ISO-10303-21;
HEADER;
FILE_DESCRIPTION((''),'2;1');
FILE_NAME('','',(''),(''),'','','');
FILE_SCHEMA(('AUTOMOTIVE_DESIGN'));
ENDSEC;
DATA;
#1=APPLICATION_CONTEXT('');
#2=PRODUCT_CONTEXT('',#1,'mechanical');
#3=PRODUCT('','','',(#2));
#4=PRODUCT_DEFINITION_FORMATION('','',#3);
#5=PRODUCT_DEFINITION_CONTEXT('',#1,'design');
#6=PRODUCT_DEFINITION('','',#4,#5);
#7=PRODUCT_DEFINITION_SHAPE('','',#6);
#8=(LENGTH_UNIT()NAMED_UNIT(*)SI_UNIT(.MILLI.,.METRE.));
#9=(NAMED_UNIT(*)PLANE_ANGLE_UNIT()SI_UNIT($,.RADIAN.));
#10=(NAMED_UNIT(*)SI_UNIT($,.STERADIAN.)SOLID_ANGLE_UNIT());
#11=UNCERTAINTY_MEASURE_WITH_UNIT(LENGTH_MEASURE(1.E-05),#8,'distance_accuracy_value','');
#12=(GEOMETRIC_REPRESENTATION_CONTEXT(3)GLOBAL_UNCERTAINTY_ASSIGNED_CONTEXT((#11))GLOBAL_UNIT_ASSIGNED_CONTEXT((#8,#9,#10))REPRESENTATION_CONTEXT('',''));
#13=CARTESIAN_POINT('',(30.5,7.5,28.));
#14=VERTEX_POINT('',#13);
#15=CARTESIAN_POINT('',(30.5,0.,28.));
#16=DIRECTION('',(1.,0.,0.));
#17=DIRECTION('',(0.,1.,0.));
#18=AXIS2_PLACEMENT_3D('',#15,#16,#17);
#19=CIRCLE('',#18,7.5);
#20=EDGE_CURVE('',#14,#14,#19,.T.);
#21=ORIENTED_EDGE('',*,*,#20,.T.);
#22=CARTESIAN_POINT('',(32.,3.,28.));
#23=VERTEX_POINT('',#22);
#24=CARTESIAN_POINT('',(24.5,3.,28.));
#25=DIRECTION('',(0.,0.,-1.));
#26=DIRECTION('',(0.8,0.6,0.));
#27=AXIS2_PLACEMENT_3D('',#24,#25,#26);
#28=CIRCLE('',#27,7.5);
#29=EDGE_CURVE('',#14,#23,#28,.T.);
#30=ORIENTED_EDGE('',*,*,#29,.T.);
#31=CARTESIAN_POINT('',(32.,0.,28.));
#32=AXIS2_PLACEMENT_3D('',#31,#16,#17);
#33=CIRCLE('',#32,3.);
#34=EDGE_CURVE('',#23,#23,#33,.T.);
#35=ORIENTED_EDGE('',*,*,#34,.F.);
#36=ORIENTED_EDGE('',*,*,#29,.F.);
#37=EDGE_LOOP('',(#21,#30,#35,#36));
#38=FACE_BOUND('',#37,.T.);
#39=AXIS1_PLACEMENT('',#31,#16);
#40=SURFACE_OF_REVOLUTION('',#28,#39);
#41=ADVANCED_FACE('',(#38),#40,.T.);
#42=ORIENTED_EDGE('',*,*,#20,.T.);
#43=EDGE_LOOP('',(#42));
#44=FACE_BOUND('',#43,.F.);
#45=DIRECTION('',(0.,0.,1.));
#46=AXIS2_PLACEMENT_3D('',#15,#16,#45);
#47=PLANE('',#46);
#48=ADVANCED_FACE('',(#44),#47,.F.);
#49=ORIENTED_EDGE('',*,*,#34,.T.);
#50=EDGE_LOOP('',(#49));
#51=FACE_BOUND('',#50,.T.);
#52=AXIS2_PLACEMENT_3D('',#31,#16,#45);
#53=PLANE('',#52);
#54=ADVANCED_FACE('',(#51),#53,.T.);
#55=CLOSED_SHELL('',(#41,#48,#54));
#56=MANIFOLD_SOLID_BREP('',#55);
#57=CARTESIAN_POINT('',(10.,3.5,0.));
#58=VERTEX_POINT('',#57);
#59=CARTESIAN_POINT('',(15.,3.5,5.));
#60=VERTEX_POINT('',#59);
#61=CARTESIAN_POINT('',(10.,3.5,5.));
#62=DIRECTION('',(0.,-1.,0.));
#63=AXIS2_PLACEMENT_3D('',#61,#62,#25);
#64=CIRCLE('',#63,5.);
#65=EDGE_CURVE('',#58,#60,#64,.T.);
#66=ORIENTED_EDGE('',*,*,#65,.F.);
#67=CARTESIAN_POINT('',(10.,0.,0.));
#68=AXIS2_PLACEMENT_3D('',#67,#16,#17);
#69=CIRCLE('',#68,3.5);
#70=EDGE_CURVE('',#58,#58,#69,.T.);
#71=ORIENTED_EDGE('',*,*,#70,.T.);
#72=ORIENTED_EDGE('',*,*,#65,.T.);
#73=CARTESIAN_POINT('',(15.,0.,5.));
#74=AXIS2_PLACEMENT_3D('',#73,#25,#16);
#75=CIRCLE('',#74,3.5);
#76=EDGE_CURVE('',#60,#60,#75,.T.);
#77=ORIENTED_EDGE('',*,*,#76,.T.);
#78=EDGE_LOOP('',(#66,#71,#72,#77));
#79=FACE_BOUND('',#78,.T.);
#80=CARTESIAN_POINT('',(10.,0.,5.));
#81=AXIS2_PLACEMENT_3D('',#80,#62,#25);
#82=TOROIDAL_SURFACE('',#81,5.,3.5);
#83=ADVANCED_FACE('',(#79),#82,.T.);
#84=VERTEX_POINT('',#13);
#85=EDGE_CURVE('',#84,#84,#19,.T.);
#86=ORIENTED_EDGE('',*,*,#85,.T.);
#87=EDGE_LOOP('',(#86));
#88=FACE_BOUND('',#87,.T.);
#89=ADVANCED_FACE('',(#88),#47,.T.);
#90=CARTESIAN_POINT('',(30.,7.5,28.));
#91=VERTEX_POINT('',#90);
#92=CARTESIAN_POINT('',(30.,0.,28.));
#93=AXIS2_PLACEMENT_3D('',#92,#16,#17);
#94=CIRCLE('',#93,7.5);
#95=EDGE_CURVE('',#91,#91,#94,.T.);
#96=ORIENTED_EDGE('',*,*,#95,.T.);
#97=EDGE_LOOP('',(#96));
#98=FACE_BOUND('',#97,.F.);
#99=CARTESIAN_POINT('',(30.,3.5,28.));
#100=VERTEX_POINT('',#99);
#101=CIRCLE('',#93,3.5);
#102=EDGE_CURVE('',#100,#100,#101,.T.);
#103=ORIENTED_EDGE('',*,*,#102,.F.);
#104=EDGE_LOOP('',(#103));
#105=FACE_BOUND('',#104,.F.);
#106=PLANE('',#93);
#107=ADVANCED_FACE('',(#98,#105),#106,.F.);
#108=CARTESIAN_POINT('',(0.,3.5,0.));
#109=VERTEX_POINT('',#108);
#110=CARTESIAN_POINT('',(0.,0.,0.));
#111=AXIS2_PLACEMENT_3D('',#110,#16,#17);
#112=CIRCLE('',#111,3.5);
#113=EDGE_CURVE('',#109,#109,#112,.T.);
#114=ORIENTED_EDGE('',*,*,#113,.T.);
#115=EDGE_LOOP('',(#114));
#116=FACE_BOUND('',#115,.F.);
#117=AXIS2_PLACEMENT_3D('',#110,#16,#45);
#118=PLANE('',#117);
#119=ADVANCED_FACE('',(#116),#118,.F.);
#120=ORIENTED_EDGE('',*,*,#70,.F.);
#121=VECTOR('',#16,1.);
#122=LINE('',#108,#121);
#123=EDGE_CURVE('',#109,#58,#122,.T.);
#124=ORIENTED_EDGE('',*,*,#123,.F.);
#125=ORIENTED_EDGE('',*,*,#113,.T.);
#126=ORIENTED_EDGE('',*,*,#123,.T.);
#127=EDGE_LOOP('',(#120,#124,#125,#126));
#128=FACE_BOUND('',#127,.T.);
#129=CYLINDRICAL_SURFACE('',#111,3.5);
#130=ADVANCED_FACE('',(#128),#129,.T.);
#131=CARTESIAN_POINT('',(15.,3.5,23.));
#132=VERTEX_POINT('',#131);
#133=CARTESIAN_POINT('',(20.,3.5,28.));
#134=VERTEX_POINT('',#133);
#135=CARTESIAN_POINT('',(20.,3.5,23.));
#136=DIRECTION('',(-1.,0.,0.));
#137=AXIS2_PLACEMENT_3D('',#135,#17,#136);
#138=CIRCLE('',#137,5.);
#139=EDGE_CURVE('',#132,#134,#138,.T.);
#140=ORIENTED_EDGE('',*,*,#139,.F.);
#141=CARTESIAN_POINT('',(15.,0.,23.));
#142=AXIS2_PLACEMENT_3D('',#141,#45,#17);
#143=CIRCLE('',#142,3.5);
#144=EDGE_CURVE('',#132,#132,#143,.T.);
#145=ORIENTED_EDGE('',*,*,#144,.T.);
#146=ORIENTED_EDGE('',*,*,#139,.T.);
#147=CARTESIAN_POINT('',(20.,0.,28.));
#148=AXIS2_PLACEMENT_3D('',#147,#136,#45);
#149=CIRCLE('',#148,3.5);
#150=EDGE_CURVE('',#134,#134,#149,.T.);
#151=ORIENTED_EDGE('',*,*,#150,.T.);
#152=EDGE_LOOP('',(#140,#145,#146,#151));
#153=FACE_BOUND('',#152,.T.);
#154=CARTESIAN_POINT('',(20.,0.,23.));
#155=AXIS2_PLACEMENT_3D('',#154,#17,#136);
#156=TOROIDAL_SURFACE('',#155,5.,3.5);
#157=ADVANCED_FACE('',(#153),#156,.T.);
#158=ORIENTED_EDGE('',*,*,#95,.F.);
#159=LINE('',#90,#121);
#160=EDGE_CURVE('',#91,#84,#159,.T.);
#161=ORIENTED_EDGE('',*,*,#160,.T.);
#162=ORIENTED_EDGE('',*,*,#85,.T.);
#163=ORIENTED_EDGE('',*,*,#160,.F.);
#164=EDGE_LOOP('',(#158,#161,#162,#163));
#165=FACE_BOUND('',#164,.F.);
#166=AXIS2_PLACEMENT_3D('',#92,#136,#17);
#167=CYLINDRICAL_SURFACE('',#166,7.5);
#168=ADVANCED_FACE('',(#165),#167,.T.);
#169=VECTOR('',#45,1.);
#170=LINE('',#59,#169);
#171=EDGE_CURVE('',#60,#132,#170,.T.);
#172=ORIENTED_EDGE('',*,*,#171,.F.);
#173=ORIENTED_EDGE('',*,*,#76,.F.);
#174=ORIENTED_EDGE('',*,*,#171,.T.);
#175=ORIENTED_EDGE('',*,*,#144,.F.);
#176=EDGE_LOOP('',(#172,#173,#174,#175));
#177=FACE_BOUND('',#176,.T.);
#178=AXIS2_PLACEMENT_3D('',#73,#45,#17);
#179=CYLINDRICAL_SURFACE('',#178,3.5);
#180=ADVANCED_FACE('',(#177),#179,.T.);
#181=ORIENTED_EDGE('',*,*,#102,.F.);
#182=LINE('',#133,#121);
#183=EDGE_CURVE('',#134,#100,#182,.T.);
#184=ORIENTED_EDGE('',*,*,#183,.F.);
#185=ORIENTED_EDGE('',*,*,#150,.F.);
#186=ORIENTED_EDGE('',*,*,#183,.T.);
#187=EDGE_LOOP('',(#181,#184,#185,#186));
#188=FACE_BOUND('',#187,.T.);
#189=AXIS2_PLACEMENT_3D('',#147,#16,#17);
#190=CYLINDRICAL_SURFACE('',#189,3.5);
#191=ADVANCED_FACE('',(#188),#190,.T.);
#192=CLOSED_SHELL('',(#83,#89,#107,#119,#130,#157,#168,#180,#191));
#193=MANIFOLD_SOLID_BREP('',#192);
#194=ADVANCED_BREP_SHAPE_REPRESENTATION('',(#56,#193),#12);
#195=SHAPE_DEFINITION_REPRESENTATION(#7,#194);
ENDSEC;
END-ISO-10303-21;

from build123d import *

# Parameters (mm, degrees)
F1_R     = 3.5
F3_R     = 7.5
F3_R_2   = 3.5
F4_DEPTH = 0.5
F5_DEPTH = 0.5
F6_DEPTH = 1.5


# Not quite as in the source:
# - a fillet or chamfer that OpenCascade refuses, or shapes differently, is made with other operations: its cross-section is extruded or revolved along the edge and cut away or added
# - a feature names something its author has since deleted; it is built from what else it names


with BuildPart() as f2:
    # F2: sweep along a path in F0
    with BuildLine(Plane.XZ) as f2_path:
        Line((0, 0), (10, 0))
        ThreePointArc((10, 0), (13.5355339059, 1.4644660941), (15, 5))
        Line((15, 5), (15, 23))
        ThreePointArc((15, 23), (16.4644660941, 26.5355339059), (20, 28))
        Line((20, 28), (30, 28))
    # F1 (on Right) → F2 (sweep)
    with BuildSketch(Plane.YZ):
        Circle(F1_R)
    sweep(path=f2_path.line)

    # F3 (on face) → F4 (join)
    with BuildSketch(Plane.YZ.offset(30)):
        with Locations((0, 28)):
            Circle(F3_R)
        with Locations((0, 28)):
            Circle(F3_R_2, mode=Mode.SUBTRACT)
    extrude(amount=F4_DEPTH)

    # F5 (add): a face of the model
    f5_faces = [f2.faces().sort_by_distance(p)[0] for p in [
        (30, 0, 28),
    ]]
    extrude(f5_faces, amount=F5_DEPTH)


with BuildPart() as f6:
    # F6 (new): a face of the model
    f6_faces = [f2.part.faces().sort_by_distance(p)[0] for p in [
        (30.5, 0, 28),
    ]]
    extrude(f6_faces, amount=F6_DEPTH)

    # F7: fillet of radius 7.5 on 1 edges, made by hand

    # F7_s1 → F7_t2 (revolve, cut)
    with BuildSketch(Plane.XY.offset(28)):
        with BuildLine():
            ThreePointArc((30.5, 7.5), (31.6151247354, 5.3717082451), (32, 3))
            Line((32, 3), (32, 7.5))
            Line((32, 7.5), (30.5, 7.5))
        make_face()
    revolve(axis=Axis((32, 0, 28), (1, 0, 0)), mode=Mode.SUBTRACT)


solid = Compound([f2.part, f6.part])
